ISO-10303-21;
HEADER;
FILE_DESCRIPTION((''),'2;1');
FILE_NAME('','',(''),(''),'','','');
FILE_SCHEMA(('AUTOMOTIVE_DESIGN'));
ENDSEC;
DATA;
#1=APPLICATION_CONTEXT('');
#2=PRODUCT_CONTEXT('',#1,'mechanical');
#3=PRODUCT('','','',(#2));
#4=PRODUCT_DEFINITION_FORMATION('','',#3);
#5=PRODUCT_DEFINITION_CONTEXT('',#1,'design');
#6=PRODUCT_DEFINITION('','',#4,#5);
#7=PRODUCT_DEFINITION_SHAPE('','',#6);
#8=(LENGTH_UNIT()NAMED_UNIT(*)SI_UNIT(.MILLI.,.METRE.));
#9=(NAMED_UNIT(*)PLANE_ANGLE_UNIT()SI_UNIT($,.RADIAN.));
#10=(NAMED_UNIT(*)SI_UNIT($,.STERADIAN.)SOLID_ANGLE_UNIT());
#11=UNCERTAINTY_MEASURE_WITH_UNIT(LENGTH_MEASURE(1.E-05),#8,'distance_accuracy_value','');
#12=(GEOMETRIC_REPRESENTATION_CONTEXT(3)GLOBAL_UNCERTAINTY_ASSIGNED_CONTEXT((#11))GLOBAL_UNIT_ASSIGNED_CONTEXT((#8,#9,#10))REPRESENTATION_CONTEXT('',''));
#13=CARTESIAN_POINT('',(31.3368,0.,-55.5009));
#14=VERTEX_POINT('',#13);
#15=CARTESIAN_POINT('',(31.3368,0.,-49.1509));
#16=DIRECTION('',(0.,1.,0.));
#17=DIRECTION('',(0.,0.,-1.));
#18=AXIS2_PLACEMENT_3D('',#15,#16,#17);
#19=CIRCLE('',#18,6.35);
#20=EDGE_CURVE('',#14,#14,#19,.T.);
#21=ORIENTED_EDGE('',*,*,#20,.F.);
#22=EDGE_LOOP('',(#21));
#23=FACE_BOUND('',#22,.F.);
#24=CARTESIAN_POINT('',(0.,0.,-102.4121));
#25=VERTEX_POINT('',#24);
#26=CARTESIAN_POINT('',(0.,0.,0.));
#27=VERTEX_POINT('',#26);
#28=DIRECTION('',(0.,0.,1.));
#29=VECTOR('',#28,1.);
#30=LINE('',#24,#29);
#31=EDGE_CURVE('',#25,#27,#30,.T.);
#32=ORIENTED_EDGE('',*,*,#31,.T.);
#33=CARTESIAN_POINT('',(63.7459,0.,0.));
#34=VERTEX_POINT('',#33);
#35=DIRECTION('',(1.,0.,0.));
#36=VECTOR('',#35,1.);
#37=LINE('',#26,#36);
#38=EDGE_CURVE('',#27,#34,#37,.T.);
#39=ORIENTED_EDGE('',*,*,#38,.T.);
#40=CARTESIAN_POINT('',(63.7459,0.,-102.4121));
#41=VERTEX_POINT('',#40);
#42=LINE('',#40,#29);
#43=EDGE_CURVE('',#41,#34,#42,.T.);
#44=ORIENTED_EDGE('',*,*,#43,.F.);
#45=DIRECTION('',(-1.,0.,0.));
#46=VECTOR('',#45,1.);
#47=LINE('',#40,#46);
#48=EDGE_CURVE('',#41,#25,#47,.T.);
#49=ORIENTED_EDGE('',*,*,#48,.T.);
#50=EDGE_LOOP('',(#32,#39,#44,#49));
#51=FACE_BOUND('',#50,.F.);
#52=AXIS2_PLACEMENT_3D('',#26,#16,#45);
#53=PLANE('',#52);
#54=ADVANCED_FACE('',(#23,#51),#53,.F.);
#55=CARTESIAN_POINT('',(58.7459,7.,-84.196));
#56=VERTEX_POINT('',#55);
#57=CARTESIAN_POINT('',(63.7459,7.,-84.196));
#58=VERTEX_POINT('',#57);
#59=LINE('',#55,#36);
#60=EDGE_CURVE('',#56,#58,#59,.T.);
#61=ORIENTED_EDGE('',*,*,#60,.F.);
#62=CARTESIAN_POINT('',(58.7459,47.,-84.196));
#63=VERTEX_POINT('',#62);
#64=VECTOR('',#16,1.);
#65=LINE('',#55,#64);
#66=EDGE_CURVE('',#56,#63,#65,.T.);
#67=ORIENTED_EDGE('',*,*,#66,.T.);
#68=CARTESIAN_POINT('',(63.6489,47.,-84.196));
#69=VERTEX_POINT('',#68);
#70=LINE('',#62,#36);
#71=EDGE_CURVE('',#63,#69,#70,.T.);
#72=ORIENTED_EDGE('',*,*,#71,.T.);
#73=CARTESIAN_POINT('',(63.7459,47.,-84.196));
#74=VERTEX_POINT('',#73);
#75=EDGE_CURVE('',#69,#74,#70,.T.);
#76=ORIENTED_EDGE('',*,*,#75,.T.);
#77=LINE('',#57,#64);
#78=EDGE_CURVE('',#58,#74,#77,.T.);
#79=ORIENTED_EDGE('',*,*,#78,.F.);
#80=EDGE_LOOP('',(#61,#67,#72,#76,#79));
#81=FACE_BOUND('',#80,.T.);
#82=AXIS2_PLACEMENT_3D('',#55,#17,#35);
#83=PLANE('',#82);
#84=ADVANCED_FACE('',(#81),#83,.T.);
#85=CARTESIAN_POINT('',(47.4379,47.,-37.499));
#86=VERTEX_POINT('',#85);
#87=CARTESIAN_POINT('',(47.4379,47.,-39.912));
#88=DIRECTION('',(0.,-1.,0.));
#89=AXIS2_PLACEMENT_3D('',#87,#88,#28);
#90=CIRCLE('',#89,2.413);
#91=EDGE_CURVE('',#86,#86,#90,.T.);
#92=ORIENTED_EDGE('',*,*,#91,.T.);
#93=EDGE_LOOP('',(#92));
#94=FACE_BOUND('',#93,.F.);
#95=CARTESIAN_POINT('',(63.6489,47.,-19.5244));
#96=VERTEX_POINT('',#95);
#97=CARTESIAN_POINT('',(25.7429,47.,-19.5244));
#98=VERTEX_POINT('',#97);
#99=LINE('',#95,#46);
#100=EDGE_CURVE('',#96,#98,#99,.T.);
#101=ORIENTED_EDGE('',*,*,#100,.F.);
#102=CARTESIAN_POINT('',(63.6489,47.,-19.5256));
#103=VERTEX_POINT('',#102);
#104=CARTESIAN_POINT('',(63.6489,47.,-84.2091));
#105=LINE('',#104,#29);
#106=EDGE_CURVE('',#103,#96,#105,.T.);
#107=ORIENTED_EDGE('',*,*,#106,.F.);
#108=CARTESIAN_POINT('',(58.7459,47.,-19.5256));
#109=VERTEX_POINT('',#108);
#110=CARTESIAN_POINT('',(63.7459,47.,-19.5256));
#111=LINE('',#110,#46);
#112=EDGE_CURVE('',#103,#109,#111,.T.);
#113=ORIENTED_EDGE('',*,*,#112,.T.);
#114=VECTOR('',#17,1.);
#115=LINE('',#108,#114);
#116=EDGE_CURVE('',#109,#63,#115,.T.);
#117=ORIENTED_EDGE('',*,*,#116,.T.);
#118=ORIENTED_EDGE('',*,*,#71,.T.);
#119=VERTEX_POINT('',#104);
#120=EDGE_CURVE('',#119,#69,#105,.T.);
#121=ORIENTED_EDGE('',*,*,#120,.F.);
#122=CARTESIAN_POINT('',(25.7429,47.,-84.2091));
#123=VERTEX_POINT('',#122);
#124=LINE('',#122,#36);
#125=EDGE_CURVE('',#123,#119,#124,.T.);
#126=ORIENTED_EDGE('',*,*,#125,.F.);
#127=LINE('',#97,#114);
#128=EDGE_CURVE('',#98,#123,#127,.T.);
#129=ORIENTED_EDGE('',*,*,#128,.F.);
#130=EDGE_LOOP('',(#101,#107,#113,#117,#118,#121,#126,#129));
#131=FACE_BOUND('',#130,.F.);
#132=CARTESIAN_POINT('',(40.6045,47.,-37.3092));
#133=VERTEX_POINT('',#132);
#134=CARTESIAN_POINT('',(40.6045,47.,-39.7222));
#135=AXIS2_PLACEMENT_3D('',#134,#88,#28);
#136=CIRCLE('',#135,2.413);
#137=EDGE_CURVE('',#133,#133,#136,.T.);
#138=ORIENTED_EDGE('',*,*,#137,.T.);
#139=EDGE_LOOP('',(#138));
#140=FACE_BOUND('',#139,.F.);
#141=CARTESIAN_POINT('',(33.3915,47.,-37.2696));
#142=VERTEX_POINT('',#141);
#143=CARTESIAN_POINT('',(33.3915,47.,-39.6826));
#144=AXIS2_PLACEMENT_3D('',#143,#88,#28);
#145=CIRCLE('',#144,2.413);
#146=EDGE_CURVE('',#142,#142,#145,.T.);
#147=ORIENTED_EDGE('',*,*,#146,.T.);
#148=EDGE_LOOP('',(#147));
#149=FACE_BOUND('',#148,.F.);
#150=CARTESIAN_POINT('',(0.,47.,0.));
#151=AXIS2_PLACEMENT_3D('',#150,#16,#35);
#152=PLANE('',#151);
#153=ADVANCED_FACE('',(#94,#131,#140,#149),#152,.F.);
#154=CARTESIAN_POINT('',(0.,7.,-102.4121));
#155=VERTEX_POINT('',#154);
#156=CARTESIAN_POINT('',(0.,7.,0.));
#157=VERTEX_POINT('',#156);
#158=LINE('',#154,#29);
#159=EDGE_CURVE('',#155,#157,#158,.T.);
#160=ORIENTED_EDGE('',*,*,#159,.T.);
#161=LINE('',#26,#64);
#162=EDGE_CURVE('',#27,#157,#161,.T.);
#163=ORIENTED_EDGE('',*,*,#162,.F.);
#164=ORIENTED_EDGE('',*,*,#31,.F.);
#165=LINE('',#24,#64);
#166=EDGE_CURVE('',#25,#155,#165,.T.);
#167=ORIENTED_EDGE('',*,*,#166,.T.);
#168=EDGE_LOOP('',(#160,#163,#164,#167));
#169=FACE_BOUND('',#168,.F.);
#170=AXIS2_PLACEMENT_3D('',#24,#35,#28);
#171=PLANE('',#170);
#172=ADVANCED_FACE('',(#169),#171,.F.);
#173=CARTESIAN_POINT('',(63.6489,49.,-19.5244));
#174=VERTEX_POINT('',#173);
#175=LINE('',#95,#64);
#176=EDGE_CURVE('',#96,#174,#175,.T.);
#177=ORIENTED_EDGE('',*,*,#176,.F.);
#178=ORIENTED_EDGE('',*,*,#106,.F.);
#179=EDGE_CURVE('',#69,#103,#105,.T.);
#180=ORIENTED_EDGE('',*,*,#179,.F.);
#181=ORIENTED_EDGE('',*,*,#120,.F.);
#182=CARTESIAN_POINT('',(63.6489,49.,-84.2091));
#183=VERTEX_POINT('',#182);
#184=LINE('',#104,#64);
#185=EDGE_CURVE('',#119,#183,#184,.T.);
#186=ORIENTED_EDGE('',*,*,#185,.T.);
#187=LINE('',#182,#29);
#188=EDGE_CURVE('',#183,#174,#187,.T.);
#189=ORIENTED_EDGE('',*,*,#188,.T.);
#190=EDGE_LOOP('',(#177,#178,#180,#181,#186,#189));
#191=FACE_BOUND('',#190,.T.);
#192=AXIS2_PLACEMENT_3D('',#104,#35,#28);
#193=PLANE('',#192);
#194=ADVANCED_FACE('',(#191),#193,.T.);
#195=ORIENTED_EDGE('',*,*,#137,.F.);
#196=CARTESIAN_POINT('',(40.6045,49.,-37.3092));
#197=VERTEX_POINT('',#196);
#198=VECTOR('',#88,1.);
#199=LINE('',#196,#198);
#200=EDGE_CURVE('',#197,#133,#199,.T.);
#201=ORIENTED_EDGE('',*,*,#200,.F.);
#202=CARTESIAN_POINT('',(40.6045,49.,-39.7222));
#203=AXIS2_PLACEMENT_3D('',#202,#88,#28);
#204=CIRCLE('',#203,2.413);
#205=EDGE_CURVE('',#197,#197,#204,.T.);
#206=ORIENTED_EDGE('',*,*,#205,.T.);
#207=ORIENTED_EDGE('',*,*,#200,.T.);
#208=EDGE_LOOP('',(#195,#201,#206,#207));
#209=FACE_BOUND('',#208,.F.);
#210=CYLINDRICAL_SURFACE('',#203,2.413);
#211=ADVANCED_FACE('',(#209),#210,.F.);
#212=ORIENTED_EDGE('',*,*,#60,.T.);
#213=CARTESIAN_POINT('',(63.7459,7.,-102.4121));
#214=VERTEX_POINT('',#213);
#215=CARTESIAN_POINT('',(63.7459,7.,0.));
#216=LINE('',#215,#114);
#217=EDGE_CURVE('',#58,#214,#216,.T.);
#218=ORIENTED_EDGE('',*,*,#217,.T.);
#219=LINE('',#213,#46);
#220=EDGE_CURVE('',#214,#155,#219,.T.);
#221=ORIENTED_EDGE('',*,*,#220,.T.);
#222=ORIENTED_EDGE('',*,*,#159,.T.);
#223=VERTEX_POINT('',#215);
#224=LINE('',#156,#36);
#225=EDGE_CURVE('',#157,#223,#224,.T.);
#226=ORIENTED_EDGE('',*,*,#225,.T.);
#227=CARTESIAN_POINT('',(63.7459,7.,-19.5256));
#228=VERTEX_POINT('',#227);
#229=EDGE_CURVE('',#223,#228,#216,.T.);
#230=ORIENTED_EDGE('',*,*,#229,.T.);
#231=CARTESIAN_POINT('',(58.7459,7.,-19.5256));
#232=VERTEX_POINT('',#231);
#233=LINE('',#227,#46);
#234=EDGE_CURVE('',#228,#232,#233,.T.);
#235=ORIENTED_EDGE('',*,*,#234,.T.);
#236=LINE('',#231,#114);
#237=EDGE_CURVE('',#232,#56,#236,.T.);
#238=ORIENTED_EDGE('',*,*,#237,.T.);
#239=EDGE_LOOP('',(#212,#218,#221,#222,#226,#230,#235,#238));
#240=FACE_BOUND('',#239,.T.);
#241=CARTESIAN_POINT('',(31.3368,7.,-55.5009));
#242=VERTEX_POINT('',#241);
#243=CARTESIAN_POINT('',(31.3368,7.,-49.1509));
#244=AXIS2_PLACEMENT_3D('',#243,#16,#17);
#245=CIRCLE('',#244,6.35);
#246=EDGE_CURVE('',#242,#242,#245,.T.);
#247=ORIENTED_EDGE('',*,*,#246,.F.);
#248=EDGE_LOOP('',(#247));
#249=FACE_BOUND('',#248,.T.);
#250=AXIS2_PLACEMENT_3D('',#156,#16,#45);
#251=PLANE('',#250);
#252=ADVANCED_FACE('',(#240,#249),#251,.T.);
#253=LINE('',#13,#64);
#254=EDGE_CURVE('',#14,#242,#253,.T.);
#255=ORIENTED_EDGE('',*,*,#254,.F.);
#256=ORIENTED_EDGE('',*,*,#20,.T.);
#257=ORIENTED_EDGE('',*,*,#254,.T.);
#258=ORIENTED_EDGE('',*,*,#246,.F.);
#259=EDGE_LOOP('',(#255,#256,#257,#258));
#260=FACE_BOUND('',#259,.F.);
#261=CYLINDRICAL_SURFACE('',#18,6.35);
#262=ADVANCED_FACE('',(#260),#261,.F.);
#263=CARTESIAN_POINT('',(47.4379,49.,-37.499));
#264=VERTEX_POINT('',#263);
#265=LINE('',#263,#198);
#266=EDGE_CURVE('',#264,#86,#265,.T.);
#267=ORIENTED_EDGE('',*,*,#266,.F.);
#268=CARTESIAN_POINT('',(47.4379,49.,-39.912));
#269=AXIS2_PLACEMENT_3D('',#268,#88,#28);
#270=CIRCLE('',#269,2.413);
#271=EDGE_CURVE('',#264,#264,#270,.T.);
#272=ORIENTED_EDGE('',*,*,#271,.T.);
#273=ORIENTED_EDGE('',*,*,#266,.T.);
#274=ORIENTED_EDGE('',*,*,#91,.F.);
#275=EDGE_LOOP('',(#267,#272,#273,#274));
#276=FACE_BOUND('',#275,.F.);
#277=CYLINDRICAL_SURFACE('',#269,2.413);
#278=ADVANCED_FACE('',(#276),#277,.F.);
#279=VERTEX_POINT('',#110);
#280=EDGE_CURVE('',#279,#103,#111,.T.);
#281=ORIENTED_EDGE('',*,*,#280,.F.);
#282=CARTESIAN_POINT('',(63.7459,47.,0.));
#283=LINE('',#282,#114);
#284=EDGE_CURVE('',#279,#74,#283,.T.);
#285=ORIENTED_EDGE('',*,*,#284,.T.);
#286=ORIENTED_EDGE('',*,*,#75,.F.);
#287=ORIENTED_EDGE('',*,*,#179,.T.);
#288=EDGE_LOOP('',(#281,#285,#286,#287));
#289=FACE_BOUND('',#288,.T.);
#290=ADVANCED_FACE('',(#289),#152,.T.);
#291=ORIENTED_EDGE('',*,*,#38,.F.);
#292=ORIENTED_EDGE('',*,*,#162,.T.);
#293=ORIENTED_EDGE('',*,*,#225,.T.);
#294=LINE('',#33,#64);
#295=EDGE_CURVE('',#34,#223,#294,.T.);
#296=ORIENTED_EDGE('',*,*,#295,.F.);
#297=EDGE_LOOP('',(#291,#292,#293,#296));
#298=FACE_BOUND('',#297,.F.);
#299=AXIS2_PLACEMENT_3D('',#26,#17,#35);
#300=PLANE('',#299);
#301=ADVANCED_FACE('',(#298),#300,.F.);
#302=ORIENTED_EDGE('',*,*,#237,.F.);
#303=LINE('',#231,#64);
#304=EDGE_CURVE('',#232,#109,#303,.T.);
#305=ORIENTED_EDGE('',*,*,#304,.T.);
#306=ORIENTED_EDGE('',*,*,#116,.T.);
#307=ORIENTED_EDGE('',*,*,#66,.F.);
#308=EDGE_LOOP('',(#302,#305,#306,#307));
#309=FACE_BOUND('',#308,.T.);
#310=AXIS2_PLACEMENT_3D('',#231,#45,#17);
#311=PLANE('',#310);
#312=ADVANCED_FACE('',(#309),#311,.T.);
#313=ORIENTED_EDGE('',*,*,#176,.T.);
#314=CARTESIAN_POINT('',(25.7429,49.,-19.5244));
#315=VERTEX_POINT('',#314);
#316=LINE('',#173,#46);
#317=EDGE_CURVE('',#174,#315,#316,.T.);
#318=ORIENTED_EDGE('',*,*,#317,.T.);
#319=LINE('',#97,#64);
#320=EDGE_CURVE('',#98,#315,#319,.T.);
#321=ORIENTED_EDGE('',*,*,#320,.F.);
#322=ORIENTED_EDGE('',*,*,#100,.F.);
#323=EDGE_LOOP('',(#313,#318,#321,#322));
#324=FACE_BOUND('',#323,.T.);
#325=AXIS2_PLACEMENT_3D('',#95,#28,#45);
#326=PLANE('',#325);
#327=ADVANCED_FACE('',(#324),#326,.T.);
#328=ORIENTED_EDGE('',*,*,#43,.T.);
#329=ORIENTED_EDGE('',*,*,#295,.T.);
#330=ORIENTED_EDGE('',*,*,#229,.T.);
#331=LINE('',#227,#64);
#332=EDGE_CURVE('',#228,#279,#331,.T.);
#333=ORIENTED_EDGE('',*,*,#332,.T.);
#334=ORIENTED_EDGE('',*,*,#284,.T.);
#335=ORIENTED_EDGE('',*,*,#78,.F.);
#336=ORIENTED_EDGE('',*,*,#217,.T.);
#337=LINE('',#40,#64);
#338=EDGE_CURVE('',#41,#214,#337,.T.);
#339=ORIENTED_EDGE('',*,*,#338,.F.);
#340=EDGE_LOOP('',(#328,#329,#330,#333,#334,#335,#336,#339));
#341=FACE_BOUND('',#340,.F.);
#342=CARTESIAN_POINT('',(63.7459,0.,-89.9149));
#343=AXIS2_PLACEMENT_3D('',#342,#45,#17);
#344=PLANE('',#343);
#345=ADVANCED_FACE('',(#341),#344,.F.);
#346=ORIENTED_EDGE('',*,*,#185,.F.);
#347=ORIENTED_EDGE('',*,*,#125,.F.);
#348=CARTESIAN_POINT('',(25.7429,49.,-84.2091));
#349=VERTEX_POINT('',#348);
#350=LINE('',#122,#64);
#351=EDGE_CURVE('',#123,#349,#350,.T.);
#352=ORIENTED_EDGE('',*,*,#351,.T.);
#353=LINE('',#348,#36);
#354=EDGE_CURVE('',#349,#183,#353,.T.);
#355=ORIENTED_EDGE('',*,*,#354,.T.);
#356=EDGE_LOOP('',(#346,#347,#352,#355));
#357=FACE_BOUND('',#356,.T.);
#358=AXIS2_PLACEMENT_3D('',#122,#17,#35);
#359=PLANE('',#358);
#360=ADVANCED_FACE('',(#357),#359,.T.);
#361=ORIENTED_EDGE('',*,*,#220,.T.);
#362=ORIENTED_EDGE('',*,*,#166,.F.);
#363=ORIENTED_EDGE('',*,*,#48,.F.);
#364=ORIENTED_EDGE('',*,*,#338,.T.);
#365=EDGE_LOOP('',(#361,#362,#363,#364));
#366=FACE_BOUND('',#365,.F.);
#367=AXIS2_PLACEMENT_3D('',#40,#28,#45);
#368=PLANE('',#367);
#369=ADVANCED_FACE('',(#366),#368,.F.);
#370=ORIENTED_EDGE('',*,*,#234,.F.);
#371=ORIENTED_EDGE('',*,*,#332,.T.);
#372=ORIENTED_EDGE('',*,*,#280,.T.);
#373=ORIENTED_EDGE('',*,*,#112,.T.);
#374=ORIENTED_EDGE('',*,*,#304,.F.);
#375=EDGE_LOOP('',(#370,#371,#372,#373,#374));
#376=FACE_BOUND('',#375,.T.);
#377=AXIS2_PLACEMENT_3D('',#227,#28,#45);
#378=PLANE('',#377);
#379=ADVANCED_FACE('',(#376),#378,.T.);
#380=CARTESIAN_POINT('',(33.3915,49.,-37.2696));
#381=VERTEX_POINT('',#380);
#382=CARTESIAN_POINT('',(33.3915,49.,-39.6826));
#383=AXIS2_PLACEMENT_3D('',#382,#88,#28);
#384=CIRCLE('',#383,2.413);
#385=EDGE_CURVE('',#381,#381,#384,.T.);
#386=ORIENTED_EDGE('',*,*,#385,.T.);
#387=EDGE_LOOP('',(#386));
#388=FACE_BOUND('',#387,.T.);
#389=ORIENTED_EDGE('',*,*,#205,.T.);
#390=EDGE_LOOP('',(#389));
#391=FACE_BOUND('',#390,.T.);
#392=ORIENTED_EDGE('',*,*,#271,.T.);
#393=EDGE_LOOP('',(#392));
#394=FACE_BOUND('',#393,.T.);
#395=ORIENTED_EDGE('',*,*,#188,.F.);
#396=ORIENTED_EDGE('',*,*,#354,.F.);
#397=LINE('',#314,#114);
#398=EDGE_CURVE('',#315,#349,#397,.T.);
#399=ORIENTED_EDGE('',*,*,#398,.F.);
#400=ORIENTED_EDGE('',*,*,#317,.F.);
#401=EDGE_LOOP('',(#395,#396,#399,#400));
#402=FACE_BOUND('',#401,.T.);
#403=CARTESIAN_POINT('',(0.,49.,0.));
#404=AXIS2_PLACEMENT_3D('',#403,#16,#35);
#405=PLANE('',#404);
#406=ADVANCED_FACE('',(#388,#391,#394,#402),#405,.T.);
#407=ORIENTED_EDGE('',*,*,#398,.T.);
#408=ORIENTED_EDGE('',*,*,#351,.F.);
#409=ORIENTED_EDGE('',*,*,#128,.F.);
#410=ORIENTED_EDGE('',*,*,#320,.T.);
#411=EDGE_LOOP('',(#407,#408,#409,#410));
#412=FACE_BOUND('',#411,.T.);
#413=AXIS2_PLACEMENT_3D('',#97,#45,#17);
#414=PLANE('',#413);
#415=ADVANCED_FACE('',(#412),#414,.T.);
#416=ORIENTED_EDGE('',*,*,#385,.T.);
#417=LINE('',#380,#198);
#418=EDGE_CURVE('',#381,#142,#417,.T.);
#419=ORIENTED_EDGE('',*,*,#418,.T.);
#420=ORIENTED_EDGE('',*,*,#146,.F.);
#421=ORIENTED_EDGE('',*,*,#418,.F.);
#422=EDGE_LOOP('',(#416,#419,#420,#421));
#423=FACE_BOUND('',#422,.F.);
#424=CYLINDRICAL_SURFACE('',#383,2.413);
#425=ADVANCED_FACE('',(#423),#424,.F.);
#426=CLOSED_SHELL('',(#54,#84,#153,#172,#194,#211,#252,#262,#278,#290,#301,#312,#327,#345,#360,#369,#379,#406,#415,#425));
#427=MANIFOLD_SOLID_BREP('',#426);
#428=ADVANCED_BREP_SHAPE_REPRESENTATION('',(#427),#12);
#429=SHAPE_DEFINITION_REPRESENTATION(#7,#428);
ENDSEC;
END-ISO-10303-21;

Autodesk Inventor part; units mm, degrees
ref_plane "YZ Plane" through (0, 0, 0) normal (1, 0, 0) x (0, 1, 0)
ref_plane "XZ Plane" through (0, 0, 0) normal (0, 1, 0) x (-1, 0, 0)
ref_plane "XY Plane" through (0, 0, 0) normal (0, 0, 1) x (1, 0, 0)
sketch "Sketch1" plane through (0, 0, 0) normal (0, 1, 0) x (-1, 0, 0)
  line L0 (0, 0) -> (-63.7459, 0)
  line L1 (-63.7459, 0) -> (-63.7459, -102.4121)
  line L2 (-63.7459, -102.4121) -> (0, -102.4121)
  line L3 (0, -102.4121) -> (0, 0)
  line L4 (-57.4973, -89.9149) -> (-63.7459, -89.9149)
  line L5 (-63.7459, -89.9149) -> (-63.7459, -20.7341)
  circle A0 centre (-31.873, -51.2061) radius 6.35
extrude "Extrusion1" add sketch "Sketch1" along normal blind 7 contours L3 L2 L1 L0 | A0
sketch "Sketch2" plane through (0, 7, 0) normal (0, 1, 0) x (1, 0, 0)
  line L0 (63.7459, 0) -> (63.7459, 102.4121) projected
  line L1 (63.7459, 19.5256) -> (58.7459, 19.5256)
  line L2 (58.7459, 19.5256) -> (58.7459, 84.196)
  line L3 (58.7459, 84.196) -> (63.7459, 84.196)
  line L4 (63.7459, 84.196) -> (63.7459, 19.5256)
  point P0 (0, 0)
  dimension "d37" = 5
extrude "Extrusion2" add sketch "Sketch2" along normal blind 40
sketch "Sketch3" plane through (0, 47, 0) normal (0, 1, 0) x (1, 0, 0)
  point P0 (0, 0)
sketch "Sketch4" plane through (0, 47, 0) normal (0, 1, 0) x (1, 0, 0)
  line L0 (63.6489, 19.5244) -> (25.7429, 19.5244)
  line L1 (25.7429, 19.5244) -> (25.7429, 84.2091)
  line L2 (25.7429, 84.2091) -> (63.6489, 84.2091)
  line L3 (63.6489, 84.2091) -> (63.6489, 19.5244)
  point P0 (0, 0)
extrude "Extrusion3" add sketch "Sketch4" along normal blind 2
hole "Hole1" at (33.3915, 49, -39.6826) direction (0, -1, 0) diameter 4.826 end up to surface
hole "Hole2" at (40.6045, 49, -39.7222) direction (0, -1, 0) diameter 4.826 depth 4.7625
hole "Hole3" at (47.4379, 49, -39.912) direction (0, -1, 0) diameter 4.826 depth 4.7625
hole "Hole4" at (31.3368, 0, -49.1509) direction (0, 1, 0) diameter 12.7 depth 7.725
